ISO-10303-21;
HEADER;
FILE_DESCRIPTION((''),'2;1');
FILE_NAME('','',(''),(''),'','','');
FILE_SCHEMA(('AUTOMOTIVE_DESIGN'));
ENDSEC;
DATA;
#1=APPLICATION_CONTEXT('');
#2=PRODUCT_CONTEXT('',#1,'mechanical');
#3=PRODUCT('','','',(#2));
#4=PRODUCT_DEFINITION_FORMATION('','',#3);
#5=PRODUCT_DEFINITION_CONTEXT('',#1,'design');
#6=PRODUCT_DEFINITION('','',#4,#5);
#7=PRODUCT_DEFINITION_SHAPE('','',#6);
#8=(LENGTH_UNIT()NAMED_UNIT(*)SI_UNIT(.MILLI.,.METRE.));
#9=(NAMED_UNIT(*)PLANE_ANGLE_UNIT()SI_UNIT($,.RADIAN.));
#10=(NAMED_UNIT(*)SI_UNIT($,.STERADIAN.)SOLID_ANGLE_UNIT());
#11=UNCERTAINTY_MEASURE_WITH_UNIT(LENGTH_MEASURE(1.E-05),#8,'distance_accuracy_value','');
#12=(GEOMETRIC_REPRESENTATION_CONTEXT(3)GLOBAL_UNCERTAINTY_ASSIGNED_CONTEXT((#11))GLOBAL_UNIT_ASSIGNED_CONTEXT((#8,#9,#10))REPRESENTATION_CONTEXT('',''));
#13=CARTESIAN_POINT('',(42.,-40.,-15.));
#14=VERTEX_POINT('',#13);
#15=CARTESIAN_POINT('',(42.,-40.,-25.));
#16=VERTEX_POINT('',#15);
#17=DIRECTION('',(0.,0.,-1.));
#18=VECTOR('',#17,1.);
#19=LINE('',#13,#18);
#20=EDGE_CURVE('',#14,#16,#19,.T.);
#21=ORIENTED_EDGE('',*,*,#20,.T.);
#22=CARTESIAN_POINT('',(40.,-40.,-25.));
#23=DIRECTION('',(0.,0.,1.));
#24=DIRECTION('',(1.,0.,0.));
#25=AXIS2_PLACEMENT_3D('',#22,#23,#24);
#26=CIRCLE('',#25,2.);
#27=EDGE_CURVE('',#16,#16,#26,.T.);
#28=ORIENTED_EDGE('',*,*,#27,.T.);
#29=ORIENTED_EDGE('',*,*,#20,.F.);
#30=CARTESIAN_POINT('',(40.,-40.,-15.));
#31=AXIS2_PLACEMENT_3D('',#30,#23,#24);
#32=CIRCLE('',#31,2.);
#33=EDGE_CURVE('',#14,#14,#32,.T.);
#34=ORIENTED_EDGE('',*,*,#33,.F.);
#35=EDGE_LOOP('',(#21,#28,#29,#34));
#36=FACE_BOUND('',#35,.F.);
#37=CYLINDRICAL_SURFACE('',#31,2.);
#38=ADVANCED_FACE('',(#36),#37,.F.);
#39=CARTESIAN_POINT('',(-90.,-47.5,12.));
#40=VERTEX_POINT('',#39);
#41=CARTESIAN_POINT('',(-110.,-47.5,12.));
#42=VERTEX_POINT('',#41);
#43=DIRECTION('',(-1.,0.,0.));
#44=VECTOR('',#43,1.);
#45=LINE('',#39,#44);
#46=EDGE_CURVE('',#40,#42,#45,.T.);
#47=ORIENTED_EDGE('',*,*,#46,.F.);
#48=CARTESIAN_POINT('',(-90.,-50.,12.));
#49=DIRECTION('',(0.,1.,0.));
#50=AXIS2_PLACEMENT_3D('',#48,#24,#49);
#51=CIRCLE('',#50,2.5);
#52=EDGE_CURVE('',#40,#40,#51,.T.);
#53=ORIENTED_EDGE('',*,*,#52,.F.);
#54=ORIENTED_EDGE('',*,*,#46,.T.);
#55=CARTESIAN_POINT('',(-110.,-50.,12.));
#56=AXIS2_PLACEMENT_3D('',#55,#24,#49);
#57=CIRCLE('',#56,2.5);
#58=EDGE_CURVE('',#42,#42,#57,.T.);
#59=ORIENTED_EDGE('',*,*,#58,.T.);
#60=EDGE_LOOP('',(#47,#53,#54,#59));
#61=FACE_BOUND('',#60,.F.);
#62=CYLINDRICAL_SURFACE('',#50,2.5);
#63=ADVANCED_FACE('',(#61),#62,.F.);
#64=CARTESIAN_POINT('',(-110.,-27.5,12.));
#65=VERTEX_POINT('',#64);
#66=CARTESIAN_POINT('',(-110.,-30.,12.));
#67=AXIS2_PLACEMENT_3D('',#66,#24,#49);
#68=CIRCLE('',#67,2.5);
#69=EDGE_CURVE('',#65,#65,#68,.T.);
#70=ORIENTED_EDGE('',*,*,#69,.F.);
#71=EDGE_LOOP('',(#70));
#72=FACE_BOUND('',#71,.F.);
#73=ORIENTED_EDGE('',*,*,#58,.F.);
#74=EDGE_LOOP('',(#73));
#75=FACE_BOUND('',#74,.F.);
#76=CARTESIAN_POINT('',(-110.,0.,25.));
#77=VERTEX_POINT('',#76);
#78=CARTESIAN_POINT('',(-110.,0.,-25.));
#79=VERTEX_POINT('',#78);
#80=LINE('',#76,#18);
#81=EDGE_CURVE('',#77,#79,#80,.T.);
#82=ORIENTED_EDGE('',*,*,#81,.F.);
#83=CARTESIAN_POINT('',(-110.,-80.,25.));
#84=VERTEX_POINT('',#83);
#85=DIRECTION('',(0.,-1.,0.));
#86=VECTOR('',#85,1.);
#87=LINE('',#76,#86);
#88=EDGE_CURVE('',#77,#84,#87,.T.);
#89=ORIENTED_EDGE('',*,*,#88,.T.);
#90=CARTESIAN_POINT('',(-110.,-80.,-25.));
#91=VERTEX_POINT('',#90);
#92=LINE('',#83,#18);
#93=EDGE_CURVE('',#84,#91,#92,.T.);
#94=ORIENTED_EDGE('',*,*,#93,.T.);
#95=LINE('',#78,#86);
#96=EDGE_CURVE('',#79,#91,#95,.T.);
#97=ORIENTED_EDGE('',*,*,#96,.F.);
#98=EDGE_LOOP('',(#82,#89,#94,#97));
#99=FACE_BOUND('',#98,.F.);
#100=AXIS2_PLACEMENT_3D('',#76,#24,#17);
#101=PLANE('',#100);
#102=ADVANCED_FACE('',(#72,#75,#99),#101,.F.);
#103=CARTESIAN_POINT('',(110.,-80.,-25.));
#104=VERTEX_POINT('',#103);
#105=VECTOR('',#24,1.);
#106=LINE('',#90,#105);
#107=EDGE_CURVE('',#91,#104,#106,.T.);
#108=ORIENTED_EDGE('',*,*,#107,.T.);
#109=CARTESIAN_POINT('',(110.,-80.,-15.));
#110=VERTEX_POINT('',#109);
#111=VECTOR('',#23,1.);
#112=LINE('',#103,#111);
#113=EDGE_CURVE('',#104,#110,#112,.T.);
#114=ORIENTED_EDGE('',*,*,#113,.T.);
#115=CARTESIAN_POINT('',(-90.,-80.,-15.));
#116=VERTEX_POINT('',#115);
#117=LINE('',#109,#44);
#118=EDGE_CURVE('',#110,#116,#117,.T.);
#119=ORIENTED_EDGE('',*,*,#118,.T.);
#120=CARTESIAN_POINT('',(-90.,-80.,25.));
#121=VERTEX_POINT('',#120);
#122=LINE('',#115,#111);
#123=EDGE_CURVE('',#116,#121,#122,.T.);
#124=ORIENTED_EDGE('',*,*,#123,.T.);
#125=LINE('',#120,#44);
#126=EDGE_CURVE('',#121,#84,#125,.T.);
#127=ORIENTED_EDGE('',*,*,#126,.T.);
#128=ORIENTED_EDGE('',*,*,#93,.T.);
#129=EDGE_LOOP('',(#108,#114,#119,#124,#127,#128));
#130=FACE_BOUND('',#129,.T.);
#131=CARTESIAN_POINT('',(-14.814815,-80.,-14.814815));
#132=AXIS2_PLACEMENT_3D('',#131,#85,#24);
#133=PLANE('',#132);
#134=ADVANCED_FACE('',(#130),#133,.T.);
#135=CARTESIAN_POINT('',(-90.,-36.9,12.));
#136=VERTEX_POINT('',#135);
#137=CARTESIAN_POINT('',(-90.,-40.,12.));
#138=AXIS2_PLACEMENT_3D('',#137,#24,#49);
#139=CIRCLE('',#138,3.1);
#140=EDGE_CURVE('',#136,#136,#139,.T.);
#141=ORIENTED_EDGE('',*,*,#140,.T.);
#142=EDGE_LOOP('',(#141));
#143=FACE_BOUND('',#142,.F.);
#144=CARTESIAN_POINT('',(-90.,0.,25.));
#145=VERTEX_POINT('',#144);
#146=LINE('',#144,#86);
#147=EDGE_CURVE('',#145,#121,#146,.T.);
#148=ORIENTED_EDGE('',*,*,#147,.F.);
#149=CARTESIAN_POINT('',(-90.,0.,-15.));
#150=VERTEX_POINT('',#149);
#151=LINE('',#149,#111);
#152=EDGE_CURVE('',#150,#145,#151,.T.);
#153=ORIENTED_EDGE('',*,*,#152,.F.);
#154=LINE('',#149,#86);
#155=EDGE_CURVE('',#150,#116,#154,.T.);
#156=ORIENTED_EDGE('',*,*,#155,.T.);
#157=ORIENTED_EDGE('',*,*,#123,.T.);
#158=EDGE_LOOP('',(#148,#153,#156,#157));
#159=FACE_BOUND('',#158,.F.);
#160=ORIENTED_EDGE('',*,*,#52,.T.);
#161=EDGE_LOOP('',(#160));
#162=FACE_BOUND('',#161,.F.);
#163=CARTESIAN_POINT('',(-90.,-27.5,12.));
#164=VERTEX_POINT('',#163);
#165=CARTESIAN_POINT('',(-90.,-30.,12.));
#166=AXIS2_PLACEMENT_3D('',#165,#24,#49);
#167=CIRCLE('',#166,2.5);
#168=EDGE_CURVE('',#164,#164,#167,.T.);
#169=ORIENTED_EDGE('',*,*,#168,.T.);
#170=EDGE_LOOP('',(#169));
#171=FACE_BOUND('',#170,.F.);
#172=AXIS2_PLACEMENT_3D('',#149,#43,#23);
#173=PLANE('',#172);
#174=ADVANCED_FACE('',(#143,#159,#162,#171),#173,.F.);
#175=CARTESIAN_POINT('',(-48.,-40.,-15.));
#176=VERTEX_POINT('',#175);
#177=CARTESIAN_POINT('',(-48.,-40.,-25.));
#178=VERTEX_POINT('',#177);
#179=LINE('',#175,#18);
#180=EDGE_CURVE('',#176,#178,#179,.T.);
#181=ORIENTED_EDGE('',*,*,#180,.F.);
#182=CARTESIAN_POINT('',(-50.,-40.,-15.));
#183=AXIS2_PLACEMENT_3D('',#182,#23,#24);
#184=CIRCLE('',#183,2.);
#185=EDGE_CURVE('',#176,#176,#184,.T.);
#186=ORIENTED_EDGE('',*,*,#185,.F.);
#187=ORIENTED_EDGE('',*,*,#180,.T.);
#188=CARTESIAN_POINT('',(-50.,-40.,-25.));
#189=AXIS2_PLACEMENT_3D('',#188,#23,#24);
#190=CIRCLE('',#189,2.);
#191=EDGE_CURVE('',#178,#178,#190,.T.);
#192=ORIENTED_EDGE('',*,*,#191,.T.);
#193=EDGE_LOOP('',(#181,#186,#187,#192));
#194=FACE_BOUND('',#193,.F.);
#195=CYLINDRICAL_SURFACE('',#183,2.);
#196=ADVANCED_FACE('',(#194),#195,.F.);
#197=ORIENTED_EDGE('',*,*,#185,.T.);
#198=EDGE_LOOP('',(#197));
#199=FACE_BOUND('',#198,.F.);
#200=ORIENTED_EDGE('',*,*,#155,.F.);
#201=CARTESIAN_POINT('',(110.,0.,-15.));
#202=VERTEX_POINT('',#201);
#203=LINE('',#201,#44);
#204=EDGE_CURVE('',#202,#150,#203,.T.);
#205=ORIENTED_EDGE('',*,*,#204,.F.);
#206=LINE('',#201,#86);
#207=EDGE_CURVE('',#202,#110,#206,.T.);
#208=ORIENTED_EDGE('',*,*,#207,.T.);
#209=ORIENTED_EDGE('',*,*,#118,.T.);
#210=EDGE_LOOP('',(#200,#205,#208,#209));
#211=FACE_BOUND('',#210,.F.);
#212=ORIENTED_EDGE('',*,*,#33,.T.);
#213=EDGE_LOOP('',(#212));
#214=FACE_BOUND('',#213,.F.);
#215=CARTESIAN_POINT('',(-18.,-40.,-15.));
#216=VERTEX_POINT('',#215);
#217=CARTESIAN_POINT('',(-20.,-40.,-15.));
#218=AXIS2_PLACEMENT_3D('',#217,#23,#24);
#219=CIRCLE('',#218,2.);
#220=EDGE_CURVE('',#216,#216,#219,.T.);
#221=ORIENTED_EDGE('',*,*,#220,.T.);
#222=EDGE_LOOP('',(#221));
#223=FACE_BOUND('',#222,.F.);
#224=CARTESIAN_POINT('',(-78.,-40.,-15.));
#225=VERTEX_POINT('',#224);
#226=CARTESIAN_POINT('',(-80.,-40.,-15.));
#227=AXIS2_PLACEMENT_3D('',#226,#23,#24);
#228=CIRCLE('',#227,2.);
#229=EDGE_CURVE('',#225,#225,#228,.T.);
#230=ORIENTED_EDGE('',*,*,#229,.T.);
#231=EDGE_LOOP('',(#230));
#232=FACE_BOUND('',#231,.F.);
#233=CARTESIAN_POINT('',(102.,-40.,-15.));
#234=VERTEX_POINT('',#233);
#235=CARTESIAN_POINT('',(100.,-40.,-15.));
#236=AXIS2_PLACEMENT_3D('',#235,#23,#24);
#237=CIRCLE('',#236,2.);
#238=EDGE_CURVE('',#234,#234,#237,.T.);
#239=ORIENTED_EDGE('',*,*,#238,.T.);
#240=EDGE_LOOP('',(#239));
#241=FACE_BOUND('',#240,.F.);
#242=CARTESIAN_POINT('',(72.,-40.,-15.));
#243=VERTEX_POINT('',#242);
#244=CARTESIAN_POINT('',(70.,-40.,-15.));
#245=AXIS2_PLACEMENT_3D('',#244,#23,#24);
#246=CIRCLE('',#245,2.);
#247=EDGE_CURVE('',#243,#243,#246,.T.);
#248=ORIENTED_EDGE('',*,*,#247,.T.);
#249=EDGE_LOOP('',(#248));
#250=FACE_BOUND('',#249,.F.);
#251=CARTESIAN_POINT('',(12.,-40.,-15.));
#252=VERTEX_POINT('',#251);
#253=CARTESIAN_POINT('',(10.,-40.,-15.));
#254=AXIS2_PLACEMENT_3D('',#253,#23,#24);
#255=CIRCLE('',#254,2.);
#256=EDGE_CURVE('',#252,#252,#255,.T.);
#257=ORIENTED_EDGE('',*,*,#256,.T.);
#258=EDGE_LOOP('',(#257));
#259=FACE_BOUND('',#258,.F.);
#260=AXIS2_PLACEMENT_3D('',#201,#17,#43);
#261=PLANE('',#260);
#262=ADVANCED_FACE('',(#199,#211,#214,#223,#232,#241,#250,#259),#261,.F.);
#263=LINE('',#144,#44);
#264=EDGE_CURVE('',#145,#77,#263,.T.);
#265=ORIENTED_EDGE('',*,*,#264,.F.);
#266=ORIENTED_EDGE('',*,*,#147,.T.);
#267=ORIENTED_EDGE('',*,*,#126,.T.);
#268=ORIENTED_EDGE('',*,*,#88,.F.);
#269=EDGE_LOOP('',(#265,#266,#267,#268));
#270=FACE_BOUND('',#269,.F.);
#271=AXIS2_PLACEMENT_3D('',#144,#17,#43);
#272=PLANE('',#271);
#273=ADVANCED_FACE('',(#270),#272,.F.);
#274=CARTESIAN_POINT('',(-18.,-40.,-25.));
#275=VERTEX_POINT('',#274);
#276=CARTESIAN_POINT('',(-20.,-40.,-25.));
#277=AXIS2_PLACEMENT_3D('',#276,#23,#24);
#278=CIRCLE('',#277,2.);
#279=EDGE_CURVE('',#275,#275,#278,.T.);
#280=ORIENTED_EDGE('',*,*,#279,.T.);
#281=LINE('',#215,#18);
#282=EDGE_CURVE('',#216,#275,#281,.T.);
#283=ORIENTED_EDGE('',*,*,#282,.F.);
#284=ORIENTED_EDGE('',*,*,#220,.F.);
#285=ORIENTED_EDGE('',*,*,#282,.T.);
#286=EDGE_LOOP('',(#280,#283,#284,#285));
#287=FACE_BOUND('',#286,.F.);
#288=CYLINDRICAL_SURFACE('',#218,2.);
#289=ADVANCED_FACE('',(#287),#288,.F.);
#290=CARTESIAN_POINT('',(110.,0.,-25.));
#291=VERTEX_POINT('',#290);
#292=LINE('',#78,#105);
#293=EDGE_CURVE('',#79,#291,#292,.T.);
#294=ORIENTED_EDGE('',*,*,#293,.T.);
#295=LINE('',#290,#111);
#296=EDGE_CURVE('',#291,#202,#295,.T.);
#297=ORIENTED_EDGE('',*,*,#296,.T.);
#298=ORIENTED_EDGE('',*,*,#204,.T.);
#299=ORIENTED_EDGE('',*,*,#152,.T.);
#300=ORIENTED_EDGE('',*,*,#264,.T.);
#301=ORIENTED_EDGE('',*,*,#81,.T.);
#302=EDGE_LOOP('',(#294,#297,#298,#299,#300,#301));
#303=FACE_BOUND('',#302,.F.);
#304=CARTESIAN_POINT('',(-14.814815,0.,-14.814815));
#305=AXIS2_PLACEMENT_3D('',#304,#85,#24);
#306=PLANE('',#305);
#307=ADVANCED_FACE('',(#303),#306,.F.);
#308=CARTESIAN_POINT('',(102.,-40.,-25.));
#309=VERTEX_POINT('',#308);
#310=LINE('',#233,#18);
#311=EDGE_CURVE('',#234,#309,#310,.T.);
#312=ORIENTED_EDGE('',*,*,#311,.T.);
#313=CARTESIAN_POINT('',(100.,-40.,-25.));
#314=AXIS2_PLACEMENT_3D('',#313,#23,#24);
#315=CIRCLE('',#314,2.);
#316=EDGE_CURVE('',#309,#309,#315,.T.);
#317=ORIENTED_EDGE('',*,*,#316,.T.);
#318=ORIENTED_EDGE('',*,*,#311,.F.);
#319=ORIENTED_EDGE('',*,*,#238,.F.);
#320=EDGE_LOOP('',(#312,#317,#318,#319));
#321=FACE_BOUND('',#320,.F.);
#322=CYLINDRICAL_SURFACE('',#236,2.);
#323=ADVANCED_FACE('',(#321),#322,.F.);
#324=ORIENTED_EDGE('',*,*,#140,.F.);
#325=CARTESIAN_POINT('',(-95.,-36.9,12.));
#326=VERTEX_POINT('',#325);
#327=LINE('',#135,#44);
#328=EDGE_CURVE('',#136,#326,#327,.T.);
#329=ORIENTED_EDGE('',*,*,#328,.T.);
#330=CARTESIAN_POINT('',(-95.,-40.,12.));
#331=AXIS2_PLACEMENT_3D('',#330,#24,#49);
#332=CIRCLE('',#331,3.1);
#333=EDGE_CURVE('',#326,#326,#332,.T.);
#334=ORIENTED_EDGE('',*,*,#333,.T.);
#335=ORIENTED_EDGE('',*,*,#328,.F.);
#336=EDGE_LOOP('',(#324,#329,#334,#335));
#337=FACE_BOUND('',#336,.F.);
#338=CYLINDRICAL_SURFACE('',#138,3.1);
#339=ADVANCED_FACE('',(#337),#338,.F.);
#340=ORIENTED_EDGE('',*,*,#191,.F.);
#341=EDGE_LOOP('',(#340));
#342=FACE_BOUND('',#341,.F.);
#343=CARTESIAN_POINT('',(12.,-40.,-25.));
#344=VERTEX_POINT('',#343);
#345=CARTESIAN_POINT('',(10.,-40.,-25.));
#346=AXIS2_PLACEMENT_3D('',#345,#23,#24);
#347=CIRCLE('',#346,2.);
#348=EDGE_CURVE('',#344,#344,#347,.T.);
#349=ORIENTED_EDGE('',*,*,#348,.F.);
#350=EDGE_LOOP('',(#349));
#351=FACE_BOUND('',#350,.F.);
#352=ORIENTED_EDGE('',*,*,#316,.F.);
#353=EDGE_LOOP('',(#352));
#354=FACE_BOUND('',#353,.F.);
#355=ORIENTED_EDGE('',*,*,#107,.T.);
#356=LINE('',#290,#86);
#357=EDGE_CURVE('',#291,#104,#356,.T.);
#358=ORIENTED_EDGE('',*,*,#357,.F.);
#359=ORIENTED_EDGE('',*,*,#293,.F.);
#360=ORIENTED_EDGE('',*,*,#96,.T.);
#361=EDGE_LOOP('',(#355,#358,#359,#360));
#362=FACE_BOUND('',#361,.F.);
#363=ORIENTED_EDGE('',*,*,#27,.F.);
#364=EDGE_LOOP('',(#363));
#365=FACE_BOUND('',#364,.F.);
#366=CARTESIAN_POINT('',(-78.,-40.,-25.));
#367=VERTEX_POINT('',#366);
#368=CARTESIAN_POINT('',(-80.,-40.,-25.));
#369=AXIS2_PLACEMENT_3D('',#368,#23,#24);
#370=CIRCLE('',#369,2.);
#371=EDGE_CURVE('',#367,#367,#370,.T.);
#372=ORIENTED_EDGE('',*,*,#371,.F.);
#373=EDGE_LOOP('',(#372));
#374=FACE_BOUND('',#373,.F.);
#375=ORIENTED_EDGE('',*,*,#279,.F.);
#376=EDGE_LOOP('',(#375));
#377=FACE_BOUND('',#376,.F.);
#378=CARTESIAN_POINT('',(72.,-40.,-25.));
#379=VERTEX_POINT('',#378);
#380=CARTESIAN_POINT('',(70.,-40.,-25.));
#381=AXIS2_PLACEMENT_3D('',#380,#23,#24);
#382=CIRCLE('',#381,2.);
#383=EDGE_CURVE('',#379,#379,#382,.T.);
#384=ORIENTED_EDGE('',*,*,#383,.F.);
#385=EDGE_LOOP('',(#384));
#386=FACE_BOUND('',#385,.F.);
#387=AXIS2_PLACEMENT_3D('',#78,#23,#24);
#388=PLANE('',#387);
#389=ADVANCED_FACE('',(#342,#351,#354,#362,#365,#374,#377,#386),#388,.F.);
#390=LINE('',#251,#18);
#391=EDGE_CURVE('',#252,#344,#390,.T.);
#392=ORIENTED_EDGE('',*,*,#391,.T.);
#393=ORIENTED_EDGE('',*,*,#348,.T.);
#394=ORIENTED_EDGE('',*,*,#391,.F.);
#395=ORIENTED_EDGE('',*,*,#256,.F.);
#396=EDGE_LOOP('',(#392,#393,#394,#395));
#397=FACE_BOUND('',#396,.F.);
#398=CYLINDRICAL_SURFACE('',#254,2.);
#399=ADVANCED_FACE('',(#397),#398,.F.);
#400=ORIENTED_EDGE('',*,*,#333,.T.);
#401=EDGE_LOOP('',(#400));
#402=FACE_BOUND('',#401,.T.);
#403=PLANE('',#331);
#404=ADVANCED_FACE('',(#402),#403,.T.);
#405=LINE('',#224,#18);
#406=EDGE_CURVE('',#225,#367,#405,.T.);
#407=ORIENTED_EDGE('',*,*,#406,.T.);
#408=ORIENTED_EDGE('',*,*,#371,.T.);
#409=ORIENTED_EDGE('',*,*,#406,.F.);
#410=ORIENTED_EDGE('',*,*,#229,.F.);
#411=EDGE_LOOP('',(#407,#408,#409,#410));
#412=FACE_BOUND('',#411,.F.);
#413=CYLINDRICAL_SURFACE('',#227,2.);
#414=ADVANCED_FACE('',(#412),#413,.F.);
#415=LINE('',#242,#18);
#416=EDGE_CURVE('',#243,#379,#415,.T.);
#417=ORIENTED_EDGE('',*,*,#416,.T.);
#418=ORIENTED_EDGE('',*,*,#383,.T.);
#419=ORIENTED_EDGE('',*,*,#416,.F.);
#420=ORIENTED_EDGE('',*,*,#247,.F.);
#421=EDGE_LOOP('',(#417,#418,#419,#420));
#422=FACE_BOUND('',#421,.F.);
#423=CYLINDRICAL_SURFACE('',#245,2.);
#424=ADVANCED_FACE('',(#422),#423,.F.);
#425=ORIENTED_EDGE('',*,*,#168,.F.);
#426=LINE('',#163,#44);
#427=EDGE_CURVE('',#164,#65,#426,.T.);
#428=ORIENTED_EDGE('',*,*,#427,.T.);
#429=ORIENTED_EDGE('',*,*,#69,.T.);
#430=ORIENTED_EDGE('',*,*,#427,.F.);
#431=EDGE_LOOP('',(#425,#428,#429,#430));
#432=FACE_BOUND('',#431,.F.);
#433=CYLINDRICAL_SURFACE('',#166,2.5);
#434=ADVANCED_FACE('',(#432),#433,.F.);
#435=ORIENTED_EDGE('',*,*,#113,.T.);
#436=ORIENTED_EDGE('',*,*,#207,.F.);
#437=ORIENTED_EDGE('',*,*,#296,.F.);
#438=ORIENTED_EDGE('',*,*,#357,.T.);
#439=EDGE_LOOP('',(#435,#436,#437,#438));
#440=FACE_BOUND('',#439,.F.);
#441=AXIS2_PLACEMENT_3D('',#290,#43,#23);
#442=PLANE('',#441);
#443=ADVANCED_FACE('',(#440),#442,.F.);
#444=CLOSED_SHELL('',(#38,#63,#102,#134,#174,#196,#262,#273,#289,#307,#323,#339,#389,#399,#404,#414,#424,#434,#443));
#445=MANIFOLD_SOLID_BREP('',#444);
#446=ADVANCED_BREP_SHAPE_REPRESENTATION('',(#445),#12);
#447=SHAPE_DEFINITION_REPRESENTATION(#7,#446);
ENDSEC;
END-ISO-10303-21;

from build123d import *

# Parameters (mm, degrees)
F1_DEPTH = 80
F2_R     = 2
F3_DEPTH = 25
F4_R     = 2.5
F5_DEPTH = 22
F4_R_2   = 3.1
F6_DEPTH = 5


# Not quite as in the source:
# - a feature names something its author has since deleted; it is built from what else it names


with BuildPart() as f1:
    # F0 (on Front) → F1 (new body)
    with BuildSketch(Plane.XZ):
        Polygon((-110, -25), (110, -25), (110, -15), (-90, -15), (-90, 25), (-110, 25), align=None)
    extrude(amount=F1_DEPTH)

    # F2 (on face) → F3 (cut)
    with BuildSketch(Plane.XY.offset(-15)):
        with Locations((-80, -40)):
            Circle(F2_R)
        with Locations((-50, -40)):
            Circle(F2_R)
        with Locations((-20, -40)):
            Circle(F2_R)
        with Locations((10, -40)):
            Circle(F2_R)
        with Locations((40, -40)):
            Circle(F2_R)
        with Locations((70, -40)):
            Circle(F2_R)
        with Locations((100, -40)):
            Circle(F2_R)
    extrude(amount=-F3_DEPTH, mode=Mode.SUBTRACT)

    # F4 (on face) → F5 (cut)
    with BuildSketch(Plane.YZ.offset(-90)):
        with Locations((-50, 12)):
            Circle(F4_R)
        with Locations((-30, 12)):
            Circle(F4_R)
    extrude(amount=-F5_DEPTH, mode=Mode.SUBTRACT)

    # F4 (on face) → F6 (cut)
    with BuildSketch(Plane.YZ.offset(-90)):
        with Locations((-40, 12)):
            Circle(F4_R_2)
    extrude(amount=-F6_DEPTH, mode=Mode.SUBTRACT)


solid = f1.part
